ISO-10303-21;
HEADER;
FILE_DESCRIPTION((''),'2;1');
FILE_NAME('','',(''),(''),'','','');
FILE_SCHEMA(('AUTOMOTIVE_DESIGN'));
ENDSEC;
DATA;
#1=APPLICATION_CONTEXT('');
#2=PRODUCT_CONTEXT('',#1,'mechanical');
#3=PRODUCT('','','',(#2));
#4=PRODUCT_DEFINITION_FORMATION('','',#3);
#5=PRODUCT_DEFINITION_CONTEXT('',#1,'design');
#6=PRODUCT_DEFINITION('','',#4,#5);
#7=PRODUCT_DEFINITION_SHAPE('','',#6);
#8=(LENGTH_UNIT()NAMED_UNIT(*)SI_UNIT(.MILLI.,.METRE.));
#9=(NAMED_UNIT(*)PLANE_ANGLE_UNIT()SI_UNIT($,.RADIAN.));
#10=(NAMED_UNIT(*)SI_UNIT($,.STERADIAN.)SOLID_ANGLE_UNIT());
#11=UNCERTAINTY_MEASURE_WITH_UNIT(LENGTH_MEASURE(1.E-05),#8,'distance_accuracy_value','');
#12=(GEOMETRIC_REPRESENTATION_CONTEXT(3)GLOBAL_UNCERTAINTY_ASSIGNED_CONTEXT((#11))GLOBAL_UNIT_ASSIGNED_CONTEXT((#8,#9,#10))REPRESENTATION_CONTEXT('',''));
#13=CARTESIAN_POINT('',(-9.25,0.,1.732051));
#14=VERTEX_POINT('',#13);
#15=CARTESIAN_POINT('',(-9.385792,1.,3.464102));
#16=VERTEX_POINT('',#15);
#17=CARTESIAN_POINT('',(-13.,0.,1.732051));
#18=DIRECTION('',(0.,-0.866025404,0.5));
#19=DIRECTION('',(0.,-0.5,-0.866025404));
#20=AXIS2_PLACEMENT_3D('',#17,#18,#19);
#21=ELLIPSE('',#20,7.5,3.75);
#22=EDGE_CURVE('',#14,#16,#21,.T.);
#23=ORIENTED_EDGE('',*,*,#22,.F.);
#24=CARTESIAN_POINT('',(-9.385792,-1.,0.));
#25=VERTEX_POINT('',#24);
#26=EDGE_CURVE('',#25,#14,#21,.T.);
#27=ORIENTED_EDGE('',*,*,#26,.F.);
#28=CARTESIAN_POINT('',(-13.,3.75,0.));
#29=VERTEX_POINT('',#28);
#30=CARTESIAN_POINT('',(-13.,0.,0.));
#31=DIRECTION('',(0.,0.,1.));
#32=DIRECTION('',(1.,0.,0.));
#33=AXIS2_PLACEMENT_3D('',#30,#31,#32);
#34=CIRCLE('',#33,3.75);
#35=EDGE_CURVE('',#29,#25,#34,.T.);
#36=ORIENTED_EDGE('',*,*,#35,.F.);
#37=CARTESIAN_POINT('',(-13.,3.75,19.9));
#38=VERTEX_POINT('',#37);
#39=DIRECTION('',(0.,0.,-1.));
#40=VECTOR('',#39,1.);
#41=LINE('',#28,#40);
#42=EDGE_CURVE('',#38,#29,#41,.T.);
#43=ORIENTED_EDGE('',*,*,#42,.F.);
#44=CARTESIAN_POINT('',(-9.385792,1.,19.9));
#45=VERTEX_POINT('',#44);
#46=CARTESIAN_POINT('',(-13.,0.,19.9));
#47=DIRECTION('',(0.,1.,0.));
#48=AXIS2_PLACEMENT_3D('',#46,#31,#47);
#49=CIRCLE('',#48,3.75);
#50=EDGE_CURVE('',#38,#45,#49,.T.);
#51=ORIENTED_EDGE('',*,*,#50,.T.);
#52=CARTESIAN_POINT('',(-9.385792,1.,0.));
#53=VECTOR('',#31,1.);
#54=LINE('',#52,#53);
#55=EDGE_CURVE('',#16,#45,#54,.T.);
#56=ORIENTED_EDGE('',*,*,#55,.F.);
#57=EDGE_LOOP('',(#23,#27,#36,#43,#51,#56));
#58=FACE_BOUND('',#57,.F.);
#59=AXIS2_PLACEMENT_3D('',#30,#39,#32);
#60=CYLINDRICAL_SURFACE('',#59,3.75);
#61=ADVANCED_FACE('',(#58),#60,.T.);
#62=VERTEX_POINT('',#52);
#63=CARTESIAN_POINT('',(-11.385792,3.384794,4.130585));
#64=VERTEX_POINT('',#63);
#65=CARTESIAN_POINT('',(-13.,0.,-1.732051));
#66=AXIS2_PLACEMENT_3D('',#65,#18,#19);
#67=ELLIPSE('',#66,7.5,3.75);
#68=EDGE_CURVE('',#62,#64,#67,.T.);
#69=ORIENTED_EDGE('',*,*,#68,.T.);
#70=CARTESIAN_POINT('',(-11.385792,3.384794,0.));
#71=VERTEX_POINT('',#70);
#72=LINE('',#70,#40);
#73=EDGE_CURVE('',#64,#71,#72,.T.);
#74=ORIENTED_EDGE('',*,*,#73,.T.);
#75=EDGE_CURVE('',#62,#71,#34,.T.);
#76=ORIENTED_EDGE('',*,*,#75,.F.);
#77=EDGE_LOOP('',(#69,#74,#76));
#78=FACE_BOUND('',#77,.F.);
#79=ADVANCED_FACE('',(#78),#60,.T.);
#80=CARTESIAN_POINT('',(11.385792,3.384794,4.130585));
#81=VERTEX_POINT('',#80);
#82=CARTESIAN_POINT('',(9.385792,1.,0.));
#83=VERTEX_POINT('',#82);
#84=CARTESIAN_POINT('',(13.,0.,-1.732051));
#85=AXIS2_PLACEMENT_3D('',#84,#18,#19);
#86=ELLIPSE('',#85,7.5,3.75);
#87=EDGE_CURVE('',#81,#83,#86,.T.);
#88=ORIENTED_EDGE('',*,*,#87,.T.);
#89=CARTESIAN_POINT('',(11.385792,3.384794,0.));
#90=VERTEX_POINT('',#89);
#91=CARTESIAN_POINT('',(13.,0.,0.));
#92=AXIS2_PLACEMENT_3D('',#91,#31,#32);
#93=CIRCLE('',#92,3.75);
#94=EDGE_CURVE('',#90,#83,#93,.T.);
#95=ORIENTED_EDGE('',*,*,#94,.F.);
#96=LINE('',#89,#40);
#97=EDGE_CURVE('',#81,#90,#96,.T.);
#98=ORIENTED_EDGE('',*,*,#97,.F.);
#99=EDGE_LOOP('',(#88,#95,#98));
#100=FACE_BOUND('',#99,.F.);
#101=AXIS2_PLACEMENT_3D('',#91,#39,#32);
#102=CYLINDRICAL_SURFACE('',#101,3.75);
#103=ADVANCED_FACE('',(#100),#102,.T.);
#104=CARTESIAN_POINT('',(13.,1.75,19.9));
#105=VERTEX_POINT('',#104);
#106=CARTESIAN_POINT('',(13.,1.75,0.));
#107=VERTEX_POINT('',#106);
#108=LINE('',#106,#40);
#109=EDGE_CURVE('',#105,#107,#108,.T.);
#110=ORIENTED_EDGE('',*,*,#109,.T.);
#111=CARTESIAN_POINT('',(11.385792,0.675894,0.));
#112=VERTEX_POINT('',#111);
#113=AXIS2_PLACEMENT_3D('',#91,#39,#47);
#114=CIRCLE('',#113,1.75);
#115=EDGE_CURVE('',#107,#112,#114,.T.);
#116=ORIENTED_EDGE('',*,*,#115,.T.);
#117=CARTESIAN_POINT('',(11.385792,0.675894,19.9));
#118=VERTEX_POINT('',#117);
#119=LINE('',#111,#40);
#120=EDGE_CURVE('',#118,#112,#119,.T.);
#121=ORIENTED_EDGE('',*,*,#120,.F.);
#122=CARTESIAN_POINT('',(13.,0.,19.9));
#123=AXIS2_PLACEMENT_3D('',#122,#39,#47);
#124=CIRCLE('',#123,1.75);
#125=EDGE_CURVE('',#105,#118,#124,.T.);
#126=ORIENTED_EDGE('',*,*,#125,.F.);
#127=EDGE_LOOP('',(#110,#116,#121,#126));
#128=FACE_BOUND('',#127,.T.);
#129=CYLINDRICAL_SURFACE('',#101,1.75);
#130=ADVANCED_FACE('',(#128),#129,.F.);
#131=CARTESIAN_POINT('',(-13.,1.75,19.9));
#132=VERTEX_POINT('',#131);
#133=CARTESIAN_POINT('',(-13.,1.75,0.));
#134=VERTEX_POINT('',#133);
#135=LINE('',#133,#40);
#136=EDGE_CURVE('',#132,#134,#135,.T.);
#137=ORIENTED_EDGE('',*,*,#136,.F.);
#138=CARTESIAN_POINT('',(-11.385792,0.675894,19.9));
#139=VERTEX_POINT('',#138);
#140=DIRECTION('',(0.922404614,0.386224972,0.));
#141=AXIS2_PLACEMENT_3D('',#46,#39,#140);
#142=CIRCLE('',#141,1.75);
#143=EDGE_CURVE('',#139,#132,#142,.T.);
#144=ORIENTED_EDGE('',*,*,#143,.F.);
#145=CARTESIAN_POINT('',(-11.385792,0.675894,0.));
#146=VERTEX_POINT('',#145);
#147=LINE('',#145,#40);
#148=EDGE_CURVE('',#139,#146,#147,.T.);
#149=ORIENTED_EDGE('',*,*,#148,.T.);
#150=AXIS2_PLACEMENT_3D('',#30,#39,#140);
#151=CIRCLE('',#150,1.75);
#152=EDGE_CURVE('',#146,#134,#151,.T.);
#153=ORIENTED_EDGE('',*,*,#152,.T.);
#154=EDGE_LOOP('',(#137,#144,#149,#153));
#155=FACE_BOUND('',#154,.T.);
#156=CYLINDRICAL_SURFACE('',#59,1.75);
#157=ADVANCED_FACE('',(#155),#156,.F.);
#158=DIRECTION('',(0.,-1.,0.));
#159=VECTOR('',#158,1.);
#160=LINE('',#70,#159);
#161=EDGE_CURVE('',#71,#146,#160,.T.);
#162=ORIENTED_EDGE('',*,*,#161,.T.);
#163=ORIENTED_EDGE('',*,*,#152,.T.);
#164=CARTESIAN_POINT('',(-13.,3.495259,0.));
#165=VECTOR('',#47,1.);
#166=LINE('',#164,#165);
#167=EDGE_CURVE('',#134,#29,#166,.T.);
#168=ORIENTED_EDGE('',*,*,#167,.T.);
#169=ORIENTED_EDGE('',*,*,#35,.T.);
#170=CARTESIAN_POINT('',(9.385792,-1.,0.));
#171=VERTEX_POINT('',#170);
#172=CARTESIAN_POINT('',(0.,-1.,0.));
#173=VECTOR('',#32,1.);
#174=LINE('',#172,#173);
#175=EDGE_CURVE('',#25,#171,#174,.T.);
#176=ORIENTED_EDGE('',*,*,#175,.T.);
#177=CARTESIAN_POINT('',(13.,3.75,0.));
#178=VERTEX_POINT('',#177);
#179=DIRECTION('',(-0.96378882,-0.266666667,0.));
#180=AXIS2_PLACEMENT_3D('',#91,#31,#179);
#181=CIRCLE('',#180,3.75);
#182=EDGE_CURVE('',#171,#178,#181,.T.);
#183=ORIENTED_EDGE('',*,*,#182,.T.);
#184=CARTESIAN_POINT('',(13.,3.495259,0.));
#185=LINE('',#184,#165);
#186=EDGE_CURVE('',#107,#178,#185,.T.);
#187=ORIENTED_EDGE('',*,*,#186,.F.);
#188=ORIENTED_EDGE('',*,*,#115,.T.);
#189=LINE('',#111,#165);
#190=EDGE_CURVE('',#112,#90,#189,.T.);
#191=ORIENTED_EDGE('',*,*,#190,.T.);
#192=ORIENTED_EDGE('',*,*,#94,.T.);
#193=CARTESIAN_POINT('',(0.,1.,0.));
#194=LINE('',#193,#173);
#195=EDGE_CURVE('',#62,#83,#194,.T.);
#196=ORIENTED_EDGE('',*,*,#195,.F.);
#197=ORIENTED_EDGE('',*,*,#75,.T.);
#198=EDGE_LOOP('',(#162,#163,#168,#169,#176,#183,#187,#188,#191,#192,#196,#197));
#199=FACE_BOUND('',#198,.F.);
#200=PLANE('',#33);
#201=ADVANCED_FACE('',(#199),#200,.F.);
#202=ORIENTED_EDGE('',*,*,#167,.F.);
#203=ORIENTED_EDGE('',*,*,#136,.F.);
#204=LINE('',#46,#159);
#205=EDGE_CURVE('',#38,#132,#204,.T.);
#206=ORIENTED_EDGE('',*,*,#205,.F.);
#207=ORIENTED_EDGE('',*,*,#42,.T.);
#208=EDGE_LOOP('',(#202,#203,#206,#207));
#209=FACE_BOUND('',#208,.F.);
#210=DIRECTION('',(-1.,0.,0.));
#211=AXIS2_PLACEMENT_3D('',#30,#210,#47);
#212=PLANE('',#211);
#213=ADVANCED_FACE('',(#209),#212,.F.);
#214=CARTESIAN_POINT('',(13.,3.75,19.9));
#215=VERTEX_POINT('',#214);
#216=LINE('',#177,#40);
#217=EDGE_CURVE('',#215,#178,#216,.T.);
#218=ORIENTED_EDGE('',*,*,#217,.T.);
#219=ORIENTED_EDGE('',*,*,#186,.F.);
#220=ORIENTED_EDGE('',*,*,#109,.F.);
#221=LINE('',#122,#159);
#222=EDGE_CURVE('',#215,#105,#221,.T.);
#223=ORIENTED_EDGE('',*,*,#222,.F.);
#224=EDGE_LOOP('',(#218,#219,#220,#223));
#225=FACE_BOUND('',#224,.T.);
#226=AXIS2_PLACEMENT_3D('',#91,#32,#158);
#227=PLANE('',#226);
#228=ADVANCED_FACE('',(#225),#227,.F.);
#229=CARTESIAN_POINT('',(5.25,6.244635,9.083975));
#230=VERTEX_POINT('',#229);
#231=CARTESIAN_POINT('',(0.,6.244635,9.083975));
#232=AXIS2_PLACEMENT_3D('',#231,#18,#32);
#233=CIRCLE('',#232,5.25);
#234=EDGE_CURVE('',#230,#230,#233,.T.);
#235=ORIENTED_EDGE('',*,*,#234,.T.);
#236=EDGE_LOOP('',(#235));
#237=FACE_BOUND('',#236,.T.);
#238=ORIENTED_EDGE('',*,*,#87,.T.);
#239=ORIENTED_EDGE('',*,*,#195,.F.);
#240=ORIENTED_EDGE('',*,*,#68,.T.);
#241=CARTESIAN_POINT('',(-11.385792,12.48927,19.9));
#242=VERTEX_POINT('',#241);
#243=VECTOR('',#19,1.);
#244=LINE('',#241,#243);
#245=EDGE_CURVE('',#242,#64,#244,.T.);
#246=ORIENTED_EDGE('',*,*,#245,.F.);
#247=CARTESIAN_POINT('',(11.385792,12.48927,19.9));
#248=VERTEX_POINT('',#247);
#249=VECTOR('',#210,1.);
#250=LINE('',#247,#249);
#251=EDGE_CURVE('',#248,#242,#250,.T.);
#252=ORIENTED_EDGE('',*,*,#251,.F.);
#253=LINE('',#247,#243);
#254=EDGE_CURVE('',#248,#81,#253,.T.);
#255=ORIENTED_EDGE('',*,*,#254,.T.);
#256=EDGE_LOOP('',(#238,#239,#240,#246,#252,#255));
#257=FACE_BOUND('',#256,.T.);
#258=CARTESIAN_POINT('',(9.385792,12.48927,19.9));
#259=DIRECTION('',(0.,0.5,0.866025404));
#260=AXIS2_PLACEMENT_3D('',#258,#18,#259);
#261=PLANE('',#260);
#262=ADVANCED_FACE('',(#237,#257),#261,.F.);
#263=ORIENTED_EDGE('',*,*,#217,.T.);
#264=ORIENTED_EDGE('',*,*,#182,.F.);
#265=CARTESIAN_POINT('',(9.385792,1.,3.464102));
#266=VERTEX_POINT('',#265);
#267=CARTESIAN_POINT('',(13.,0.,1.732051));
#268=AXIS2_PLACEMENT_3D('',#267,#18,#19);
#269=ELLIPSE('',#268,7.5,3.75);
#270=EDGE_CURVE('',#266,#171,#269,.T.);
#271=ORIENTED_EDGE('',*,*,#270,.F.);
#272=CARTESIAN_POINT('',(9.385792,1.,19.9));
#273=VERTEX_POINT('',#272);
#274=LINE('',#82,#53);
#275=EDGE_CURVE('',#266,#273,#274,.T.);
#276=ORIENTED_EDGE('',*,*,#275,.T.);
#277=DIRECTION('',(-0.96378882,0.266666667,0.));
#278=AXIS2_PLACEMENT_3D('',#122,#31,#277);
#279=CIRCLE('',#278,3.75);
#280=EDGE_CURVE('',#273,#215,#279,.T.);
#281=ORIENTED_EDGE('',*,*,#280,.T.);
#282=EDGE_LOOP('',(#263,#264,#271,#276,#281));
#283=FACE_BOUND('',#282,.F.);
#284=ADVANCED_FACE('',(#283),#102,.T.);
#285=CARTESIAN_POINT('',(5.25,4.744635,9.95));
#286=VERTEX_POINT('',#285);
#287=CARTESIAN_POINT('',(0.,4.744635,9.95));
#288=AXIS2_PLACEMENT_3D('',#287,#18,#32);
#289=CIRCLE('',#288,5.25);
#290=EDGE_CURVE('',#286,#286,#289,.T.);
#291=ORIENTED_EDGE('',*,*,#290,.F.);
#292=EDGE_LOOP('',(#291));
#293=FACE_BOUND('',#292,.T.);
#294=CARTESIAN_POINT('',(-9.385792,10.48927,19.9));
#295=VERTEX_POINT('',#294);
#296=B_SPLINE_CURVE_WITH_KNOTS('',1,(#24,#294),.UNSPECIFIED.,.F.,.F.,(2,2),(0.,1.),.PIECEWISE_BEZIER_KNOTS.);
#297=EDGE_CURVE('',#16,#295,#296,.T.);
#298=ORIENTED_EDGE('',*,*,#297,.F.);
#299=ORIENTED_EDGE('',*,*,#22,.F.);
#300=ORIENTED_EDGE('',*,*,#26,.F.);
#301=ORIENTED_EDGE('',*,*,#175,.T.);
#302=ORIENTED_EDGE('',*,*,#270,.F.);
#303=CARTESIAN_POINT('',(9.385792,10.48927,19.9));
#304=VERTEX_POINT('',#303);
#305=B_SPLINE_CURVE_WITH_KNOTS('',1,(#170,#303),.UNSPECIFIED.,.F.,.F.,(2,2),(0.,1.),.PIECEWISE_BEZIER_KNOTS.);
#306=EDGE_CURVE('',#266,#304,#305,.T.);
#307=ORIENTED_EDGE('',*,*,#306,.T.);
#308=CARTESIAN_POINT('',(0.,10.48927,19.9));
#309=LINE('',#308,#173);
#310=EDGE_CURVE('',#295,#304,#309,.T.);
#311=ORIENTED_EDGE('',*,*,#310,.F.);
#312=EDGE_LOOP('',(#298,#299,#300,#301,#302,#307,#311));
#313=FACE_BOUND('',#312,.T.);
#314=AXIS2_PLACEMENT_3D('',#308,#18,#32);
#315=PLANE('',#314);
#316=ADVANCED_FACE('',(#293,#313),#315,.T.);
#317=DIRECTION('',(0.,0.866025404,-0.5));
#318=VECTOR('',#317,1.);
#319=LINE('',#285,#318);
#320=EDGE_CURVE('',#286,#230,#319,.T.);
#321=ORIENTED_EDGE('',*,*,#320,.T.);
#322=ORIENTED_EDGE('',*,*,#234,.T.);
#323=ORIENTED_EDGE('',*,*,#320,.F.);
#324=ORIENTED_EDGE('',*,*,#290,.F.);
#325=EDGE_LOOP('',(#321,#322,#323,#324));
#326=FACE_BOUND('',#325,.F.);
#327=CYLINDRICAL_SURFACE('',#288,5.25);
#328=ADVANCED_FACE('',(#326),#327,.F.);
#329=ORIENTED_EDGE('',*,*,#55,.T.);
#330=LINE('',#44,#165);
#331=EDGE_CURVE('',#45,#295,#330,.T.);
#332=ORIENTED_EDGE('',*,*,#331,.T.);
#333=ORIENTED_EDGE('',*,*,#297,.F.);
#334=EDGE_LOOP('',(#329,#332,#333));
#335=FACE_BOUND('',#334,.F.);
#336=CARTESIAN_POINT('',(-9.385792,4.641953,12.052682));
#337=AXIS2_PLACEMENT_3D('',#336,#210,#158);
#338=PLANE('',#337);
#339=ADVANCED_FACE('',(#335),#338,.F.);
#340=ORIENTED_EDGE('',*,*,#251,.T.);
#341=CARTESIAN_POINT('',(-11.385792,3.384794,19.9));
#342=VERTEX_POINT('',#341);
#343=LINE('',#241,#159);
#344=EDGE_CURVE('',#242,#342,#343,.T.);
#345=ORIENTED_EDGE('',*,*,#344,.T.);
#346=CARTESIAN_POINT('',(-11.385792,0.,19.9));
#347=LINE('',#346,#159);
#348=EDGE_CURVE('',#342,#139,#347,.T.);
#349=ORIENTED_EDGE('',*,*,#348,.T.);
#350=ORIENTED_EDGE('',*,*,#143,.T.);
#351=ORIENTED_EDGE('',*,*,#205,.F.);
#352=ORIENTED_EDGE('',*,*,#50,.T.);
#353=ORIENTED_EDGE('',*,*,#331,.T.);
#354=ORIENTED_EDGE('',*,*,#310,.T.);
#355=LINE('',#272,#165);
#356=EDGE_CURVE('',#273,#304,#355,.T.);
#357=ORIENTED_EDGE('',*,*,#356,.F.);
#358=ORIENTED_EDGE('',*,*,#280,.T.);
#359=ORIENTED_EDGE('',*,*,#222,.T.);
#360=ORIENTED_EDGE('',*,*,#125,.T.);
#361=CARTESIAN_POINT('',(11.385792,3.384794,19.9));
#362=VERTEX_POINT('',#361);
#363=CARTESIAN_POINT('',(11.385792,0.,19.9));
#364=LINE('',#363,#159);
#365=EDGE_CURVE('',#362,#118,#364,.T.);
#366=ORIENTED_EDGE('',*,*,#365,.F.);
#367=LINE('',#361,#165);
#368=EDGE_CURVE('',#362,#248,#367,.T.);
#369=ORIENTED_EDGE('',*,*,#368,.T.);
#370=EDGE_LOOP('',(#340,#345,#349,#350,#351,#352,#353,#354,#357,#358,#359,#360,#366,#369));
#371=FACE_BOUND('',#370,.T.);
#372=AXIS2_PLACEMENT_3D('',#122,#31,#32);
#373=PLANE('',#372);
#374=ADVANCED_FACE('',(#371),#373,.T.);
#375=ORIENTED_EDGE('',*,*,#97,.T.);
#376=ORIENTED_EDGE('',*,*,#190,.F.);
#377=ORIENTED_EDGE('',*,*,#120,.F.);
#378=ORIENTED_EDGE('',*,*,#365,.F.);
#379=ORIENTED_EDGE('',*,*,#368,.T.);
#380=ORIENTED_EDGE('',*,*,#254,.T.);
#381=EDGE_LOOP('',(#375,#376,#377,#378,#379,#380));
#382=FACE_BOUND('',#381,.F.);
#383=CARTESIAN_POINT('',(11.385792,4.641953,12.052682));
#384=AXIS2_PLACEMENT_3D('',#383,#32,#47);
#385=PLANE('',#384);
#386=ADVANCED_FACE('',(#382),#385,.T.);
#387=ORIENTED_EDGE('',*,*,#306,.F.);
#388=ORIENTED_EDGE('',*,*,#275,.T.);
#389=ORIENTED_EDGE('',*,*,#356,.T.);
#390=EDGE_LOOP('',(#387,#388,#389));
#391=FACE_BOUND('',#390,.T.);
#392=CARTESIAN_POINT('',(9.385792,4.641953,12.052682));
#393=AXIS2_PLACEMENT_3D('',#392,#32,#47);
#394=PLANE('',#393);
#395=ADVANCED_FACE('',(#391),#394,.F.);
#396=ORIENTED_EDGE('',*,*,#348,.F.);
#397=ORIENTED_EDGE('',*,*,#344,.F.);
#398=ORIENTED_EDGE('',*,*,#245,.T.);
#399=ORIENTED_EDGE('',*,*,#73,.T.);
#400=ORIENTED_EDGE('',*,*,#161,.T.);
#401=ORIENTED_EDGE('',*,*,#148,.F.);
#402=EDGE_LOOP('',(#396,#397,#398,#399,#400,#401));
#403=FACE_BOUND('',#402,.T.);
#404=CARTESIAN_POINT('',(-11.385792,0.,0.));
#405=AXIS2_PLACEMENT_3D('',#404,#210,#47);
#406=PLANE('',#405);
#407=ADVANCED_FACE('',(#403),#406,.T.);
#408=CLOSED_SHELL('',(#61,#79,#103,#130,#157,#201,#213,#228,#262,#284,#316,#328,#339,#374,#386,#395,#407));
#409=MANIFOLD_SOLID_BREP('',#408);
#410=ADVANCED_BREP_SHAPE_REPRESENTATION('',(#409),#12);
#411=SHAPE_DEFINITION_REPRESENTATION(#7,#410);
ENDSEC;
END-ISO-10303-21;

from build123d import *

# Parameters (mm, degrees)
F0_R      = 3.75
F0_R_2    = 1.75
F1_DEPTH  = 19.9
F2_W      = 18.7715838526
F2_H      = 2
F5_W      = 18.7715838526
F5_H      = 2
F8_R      = 5.25
F9_DEPTH  = 11.6830509442
F11_DEPTH = 2
F12_W     = 1.6142080737
F12_H     = 6.9905174896
F13_DEPTH = 19.9010001


# Not quite as in the source:
# - a pattern or mirror of a feature is missing from the dataset's text; its kind, count and spacing are read off the source's solid


with BuildPart() as f1:
    # F0 (on Top) → F1 (new body)
    with BuildSketch(Plane.XY):
        with Locations((13, 0)):
            Circle(F0_R)
        with Locations((13, 0)):
            Circle(F0_R_2, mode=Mode.SUBTRACT)
    extrude(amount=F1_DEPTH)



with BuildPart() as f1b:
    # F0 (on Top) → F1, piece 2 (new body)
    with BuildSketch(Plane.XY):
        with Locations((-13, 0)):
            Circle(F0_R)
        with Locations((-13, 0)):
            Circle(F0_R_2, mode=Mode.SUBTRACT)
    extrude(amount=F1_DEPTH)


with BuildPart() as f1_1:
    add(f1.part)

    add(f1b.part)  # F6 merges F1b
    # F2 (on Top) → F6 section 0
    with BuildSketch(Plane.XY):
        Rectangle(F2_W, F2_H)
    # F5 (on offset) → F6 section 1
    with BuildSketch(Plane.XY.offset(19.9)):
        with Locations((0, 11.4892703569)):
            Rectangle(F5_W, F5_H)
    loft()

    # F8 (on offset) → F9 (cut, through all)
    with BuildSketch(Plane(origin=(0, -0.75, 0.4330127019), x_dir=(1, 0, 0), z_dir=(0, -0.8660254038, 0.5))):
        with Locations((0, 10.9892703569)):
            Circle(F8_R)
    extrude(amount=-F9_DEPTH, mode=Mode.SUBTRACT)

    # F10 (on face) → F11 (join)
    with BuildSketch(Plane(origin=(-9.3857919263, 0, 0), x_dir=(0, -1, 0), z_dir=(-1, 0, 0))):
        Polygon((-1, 19.9), (-12.4892703569, 19.9), (-1, 0), (-1, 3.4641016151), align=None)
    f11 = extrude(amount=F11_DEPTH)

    # F11_copies: F11 across plane
    add(f11.mirror(Plane(origin=(0, 0, 0), x_dir=(0, 0, 1), z_dir=(1, 0, 0))))

    # F12 (on Top) → F13 (cut, through all)
    with BuildSketch(Plane.XY):
        with Locations((-12.1928959631, 3.4952587448)):
            Rectangle(F12_W, F12_H)
    f13 = extrude(amount=F13_DEPTH, mode=Mode.SUBTRACT)

    # F13_copies: F13 across plane
    add(f13.mirror(Plane(origin=(0, 0, 0), x_dir=(0, 0, 1), z_dir=(1, 0, 0))), mode=Mode.SUBTRACT)


solid = f1_1.part
